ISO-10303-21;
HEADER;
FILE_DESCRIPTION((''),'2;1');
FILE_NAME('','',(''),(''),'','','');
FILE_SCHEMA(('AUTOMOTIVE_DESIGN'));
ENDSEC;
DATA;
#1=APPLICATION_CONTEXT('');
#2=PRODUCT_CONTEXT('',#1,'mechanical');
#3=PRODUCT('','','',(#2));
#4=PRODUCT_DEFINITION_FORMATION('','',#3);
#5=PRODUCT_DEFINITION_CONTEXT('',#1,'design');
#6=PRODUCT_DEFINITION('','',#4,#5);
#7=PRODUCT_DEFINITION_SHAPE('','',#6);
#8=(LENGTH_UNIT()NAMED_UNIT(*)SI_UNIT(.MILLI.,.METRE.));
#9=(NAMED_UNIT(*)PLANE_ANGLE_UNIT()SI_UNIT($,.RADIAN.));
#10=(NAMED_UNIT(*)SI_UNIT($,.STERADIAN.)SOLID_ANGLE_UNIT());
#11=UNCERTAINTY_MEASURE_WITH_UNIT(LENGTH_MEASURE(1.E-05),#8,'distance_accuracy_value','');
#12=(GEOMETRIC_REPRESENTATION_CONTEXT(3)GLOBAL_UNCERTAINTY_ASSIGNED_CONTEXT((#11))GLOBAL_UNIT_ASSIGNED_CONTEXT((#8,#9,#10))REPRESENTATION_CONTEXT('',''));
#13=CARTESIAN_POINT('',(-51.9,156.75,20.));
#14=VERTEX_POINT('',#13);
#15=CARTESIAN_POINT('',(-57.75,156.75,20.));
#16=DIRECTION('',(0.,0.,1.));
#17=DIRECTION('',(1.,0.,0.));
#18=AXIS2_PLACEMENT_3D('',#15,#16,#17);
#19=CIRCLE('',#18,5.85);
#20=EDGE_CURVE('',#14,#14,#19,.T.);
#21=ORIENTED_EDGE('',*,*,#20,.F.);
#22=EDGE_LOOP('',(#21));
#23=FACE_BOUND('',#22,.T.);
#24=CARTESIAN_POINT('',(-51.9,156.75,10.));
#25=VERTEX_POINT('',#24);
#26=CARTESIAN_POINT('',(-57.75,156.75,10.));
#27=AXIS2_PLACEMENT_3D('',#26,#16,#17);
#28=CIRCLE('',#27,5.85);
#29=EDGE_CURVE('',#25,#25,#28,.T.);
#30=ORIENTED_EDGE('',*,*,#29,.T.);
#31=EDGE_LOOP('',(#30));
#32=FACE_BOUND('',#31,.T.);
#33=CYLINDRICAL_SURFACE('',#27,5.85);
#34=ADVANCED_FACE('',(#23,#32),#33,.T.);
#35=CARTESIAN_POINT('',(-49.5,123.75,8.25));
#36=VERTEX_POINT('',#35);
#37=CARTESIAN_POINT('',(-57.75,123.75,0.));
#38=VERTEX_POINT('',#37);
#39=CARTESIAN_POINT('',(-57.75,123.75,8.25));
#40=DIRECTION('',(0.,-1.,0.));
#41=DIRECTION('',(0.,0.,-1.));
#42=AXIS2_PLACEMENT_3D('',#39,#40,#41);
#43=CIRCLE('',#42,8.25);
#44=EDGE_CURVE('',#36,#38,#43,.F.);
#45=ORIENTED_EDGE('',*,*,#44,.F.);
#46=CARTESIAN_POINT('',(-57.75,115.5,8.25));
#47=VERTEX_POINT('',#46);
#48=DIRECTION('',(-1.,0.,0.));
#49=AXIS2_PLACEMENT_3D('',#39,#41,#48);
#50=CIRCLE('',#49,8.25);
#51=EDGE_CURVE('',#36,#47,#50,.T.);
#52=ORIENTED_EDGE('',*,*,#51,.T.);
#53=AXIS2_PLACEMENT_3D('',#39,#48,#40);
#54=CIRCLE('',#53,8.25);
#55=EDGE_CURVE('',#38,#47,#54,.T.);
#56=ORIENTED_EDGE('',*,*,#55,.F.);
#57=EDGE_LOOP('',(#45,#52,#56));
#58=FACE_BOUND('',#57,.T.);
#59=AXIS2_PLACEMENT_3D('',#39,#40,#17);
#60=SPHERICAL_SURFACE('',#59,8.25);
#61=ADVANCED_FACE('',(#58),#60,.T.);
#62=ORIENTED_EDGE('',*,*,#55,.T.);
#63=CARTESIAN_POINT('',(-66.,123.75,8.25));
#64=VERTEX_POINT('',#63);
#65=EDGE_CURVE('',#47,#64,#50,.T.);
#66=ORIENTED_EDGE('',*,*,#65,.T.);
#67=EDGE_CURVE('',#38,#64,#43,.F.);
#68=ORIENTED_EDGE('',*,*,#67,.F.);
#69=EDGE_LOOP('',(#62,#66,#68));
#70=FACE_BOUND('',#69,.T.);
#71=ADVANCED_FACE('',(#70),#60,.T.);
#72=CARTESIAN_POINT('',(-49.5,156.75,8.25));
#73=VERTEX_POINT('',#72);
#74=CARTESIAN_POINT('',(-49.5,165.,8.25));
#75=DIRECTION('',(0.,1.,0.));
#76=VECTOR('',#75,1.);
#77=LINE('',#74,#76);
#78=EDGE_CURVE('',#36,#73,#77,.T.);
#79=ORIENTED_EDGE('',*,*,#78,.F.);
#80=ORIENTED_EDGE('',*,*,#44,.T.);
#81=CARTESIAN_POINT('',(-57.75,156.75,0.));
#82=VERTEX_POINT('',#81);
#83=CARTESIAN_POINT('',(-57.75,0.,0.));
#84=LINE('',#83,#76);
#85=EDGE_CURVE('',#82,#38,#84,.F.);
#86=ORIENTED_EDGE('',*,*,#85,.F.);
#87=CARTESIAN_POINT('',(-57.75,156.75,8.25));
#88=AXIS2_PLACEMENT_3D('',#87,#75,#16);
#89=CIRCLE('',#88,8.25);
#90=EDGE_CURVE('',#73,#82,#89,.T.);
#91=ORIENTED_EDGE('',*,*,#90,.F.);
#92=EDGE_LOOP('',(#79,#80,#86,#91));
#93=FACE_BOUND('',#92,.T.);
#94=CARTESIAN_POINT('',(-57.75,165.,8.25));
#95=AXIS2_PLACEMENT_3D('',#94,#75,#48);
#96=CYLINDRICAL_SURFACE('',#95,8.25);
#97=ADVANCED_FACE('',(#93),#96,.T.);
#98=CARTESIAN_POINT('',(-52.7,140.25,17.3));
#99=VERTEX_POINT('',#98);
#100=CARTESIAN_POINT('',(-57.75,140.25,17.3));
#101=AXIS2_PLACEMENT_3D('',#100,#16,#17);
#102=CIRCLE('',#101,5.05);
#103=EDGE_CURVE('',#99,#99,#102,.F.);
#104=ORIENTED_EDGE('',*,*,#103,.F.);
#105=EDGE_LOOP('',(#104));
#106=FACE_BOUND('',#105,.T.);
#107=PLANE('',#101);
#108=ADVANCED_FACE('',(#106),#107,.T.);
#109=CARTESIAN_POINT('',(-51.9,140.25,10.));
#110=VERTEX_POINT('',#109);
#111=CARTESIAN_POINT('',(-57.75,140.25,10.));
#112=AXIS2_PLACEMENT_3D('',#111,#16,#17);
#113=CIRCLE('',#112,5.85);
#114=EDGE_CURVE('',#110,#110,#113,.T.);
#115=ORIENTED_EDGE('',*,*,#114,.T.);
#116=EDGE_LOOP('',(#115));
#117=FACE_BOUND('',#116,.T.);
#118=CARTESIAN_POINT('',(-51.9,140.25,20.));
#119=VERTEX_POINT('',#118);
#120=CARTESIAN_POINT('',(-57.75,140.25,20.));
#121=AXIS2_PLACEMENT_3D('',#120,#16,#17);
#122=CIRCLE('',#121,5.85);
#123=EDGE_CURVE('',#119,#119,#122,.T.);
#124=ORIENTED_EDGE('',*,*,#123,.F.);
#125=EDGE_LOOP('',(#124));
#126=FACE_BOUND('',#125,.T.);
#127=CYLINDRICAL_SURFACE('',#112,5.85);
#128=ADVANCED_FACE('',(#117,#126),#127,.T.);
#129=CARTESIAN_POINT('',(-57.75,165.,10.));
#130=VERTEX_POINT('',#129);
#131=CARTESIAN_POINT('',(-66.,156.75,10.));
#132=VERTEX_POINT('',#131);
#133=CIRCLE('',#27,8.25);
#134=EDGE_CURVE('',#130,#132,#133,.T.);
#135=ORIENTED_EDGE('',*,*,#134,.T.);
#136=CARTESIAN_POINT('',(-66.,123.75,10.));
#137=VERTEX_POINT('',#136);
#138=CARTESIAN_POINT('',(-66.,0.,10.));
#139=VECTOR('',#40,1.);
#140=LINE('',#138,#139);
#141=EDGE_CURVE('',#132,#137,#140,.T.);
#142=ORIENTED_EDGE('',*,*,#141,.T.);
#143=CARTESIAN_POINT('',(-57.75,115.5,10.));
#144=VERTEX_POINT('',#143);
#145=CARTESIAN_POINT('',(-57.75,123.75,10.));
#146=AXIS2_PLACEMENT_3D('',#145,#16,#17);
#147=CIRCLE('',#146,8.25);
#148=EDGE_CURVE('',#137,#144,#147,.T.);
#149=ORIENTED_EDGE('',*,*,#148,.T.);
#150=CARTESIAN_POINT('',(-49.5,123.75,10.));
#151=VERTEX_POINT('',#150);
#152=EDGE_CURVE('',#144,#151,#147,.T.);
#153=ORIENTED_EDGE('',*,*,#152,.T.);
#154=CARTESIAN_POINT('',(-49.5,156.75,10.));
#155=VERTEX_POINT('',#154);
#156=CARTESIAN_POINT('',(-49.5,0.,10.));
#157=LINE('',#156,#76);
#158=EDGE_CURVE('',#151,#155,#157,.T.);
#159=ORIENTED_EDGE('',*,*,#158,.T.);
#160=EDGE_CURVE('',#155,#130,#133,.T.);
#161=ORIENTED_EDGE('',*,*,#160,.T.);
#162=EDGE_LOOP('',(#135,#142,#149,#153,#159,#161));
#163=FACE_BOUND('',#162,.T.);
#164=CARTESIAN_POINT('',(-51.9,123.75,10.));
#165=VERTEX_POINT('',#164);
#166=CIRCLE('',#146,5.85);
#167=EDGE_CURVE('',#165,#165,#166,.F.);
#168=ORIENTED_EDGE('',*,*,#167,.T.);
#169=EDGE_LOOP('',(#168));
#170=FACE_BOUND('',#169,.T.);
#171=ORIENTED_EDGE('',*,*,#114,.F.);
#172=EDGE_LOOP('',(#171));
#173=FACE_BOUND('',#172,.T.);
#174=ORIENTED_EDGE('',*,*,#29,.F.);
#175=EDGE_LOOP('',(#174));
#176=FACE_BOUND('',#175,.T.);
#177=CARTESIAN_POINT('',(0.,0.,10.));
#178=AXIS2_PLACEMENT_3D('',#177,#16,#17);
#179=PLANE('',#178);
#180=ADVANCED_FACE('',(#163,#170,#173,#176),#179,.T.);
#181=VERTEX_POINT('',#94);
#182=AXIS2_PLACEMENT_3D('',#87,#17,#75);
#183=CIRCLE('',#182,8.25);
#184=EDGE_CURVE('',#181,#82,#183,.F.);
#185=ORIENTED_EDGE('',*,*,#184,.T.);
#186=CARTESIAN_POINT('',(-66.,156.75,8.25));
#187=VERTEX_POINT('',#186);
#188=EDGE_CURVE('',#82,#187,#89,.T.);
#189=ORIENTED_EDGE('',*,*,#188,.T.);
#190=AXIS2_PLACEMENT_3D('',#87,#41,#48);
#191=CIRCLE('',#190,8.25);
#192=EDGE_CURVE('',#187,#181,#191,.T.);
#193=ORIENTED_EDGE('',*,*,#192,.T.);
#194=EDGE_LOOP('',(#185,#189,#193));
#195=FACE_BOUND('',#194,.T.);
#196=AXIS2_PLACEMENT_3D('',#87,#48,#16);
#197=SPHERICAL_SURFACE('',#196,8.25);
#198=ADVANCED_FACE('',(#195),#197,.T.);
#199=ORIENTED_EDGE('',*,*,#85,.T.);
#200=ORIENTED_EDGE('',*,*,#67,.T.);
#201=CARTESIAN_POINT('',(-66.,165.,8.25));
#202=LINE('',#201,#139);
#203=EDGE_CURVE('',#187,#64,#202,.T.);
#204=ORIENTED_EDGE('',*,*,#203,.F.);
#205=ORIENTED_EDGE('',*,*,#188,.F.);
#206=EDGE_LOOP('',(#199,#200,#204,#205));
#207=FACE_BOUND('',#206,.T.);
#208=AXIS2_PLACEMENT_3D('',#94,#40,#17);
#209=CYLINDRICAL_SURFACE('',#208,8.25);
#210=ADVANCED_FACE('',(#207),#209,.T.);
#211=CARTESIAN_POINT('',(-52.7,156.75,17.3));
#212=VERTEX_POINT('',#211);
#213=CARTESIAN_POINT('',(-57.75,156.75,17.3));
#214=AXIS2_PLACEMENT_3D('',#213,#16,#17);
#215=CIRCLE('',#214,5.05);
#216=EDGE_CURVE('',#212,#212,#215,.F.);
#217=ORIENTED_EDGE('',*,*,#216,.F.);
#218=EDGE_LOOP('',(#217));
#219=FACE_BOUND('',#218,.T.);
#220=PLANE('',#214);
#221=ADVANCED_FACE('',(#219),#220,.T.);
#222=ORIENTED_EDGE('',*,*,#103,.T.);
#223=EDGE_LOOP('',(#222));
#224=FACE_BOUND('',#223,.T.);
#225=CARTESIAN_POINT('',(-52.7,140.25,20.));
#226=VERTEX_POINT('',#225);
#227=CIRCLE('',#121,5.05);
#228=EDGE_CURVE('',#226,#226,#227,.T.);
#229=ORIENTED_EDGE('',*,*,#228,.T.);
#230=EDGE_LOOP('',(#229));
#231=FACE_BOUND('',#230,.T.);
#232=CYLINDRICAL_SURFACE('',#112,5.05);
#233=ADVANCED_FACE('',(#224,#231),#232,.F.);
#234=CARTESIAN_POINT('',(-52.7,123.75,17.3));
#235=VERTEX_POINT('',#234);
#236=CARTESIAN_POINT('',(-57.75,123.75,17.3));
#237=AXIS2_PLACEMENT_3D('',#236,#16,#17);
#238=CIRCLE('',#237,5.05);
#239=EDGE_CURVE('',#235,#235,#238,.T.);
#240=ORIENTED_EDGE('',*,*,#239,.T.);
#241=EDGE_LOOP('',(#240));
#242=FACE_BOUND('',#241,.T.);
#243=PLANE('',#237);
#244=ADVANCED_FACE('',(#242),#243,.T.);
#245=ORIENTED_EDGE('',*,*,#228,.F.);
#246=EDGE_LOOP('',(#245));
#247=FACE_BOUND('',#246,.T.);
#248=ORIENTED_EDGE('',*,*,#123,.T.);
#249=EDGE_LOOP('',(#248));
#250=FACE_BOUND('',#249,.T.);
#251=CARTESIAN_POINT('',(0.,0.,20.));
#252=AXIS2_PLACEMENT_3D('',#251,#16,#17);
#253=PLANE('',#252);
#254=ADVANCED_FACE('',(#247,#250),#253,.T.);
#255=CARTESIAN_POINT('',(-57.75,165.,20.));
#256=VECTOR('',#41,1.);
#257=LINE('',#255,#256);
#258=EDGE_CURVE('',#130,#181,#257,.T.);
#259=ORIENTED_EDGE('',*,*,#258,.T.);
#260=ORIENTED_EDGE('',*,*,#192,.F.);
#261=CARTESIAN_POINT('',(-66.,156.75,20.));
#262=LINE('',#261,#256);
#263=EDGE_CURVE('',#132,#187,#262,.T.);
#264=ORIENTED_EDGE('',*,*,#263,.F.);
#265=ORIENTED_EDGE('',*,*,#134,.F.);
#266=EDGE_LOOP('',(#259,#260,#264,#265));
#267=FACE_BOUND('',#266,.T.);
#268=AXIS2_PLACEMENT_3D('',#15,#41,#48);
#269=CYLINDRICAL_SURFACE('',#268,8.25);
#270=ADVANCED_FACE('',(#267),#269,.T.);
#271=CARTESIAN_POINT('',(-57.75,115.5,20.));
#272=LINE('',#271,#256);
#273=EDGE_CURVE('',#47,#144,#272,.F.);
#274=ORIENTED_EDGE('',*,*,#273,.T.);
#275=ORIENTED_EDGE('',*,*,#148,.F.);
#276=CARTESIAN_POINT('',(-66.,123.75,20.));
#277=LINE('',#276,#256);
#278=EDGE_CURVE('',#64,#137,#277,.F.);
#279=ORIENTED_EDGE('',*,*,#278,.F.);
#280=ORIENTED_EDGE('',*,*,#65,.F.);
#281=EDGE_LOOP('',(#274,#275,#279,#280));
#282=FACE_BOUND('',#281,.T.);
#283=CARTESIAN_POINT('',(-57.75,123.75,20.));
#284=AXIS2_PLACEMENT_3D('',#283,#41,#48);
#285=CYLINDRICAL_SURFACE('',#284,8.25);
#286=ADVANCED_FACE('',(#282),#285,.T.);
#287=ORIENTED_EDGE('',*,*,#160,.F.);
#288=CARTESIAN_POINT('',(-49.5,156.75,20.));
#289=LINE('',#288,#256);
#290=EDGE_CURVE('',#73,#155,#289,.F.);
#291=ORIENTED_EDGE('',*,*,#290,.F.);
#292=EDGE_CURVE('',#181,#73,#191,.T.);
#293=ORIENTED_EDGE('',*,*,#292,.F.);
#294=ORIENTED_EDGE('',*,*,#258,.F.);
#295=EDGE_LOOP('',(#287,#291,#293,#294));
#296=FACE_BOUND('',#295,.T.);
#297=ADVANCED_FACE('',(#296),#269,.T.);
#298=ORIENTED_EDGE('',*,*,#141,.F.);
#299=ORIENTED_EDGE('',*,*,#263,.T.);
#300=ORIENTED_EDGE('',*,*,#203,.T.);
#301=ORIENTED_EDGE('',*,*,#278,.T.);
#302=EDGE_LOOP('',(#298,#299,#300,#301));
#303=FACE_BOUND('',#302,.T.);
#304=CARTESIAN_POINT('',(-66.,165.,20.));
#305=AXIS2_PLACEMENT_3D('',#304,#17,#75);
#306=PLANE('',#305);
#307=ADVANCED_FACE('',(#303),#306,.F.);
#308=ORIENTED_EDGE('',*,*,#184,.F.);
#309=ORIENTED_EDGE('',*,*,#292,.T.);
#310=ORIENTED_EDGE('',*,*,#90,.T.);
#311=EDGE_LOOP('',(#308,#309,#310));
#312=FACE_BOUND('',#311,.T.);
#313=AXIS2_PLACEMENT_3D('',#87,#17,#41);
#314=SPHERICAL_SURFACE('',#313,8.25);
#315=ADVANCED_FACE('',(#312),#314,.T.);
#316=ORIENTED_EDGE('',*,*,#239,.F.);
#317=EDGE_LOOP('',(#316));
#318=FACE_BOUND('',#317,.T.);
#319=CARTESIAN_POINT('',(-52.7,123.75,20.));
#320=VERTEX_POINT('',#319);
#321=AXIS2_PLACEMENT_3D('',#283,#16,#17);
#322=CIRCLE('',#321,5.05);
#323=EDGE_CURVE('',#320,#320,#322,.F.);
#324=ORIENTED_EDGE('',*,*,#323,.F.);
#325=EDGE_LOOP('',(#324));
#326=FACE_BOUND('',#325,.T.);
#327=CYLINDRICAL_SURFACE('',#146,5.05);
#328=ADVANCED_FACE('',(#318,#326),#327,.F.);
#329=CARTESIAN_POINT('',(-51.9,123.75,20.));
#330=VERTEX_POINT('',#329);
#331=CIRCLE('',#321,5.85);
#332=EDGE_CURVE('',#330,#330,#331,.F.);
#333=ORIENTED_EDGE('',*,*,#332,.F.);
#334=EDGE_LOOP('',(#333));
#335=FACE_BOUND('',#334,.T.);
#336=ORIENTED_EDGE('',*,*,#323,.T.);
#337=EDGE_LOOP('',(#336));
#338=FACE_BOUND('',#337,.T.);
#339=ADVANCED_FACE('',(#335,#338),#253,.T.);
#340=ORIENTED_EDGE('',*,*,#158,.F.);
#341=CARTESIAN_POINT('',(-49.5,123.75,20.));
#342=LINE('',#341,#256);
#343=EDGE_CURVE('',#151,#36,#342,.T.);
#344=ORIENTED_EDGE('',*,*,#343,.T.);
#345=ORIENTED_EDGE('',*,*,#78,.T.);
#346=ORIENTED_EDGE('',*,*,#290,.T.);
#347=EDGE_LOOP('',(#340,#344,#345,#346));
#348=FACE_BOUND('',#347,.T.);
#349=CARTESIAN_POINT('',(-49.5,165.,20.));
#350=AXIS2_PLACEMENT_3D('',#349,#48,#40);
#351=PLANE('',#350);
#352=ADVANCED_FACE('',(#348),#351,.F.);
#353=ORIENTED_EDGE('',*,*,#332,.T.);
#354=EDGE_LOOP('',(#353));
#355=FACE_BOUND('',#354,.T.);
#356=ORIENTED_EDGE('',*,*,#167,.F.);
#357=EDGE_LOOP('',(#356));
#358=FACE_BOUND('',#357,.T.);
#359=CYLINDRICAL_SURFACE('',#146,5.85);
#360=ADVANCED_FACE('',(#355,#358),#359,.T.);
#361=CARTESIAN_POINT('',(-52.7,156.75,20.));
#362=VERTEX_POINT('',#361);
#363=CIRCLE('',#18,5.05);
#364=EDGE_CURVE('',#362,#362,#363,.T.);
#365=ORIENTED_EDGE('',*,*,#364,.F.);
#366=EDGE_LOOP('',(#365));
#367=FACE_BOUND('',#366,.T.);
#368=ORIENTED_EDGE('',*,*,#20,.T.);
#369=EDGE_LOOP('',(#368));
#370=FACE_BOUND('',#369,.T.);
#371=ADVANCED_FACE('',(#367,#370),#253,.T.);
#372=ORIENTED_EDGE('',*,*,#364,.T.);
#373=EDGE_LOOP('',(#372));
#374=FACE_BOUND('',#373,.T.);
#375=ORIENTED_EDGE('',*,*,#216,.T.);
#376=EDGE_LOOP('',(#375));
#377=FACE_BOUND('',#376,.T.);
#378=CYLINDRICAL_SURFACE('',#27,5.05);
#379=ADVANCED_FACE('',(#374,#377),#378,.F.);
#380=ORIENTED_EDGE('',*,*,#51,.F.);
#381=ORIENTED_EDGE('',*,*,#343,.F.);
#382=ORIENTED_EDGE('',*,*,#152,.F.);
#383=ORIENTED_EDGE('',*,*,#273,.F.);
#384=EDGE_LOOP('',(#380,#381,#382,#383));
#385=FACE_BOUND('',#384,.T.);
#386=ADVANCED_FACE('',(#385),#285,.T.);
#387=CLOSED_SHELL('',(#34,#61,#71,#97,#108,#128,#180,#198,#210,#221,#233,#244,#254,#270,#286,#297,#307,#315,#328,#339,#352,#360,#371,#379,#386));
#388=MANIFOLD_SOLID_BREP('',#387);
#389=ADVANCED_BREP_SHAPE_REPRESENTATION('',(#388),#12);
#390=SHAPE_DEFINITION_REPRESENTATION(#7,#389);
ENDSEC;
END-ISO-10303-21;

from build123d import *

# Parameters (mm, degrees)
SKETCH1_W           = 16.5
SKETCH1_H           = 49.5
BOSS_EXTRUDE1_DEPTH = 20
SKETCH2_R           = 5.85
SKETCH2_R_2         = 5.05
CUT_EXTRUDE1_DEPTH  = 10
FILLET1_R           = 8.25
SKETCH5_R           = 5.1
BOSS_EXTRUDE2_DEPTH = 7.3


with BuildPart() as part:
    # Sketch1 → Boss-Extrude1 (new body)
    with BuildSketch(Plane.XY):
        with Locations((-57.75, 140.25)):
            Rectangle(SKETCH1_W, SKETCH1_H)
    extrude(amount=BOSS_EXTRUDE1_DEPTH)

    # Sketch2 → Cut-Extrude1 (cut)
    # profile 1 of 8: a face of its own
    with BuildSketch(Plane.XY.offset(20)):
        with BuildLine():
            ThreePointArc((-63.6, 140.25), (-57.75, 146.1), (-51.9, 140.25))
            Line((-51.9, 140.25), (-49.5, 140.25))
            Line((-49.5, 140.25), (-49.5, 165))
            Line((-49.5, 165), (-66, 165))
            Line((-66, 165), (-66, 140.25))
            Line((-66, 140.25), (-63.6, 140.25))
        make_face()
        with Locations((-57.75, 156.75)):
            Circle(SKETCH2_R, mode=Mode.SUBTRACT)
    # profile 2 of 8: a face of its own
    with BuildSketch(Plane.XY.offset(20)):
        with BuildLine():
            Line((-49.5, 140.25), (-51.9, 140.25))
            ThreePointArc((-51.9, 140.25), (-57.75, 134.4), (-63.6, 140.25))
            Line((-63.6, 140.25), (-66, 140.25))
            Line((-66, 140.25), (-66, 115.5))
            Line((-66, 115.5), (-49.5, 115.5))
            Line((-49.5, 115.5), (-49.5, 140.25))
        make_face()
        with Locations((-57.75, 123.75)):
            Circle(SKETCH2_R, mode=Mode.SUBTRACT)
    # profile 3 of 8: a face of its own
    with BuildSketch(Plane.XY.offset(20)):
        with Locations((-57.75, 156.75)):
            Circle(SKETCH2_R_2)
    # profile 4 of 8: a face of its own
    with BuildSketch(Plane.XY.offset(20)):
        with BuildLine():
            ThreePointArc((-62.8, 140.25), (-57.75, 135.2), (-52.7, 140.25))
            Line((-52.7, 140.25), (-62.8, 140.25))
        make_face()
    # profile 5 of 8: a face of its own
    with BuildSketch(Plane.XY.offset(20)):
        with BuildLine():
            Line((-62.8, 140.25), (-52.7, 140.25))
            ThreePointArc((-52.7, 140.25), (-57.75, 145.3), (-62.8, 140.25))
        make_face()
    # profile 6 of 8: a face of its own
    with BuildSketch(Plane.XY.offset(20)):
        with BuildLine():
            ThreePointArc((-62.8, 140.25), (-57.75, 135.2), (-52.7, 140.25))
            Line((-52.7, 140.25), (-62.8, 140.25))
        make_face()
    # profile 7 of 8: a face of its own
    with BuildSketch(Plane.XY.offset(20)):
        with BuildLine():
            Line((-62.8, 140.25), (-52.7, 140.25))
            ThreePointArc((-52.7, 140.25), (-57.75, 145.3), (-62.8, 140.25))
        make_face()
    # profile 8 of 8: a face of its own
    with BuildSketch(Plane.XY.offset(20)):
        with Locations((-57.75, 123.75)):
            Circle(SKETCH2_R_2)
    extrude(amount=-CUT_EXTRUDE1_DEPTH, mode=Mode.SUBTRACT)

    # Fillet1
    fillet1_edges = [part.edges().sort_by_distance(p)[0] for p in [
        (-57.75, 165, 0),
    ]]
    fillet(fillet1_edges, radius=FILLET1_R)
    fillet1_2_edges = [part.edges().sort_by_distance(p)[0] for p in [
        (-49.5, 136.125, 0),
    ]]
    fillet(fillet1_2_edges, radius=FILLET1_R)
    fillet1_3_edges = [part.edges().sort_by_distance(p)[0] for p in [
        (-61.875, 115.5, 0),
    ]]
    fillet(fillet1_3_edges, radius=FILLET1_R)
    fillet1_4_edges = [part.edges().sort_by_distance(p)[0] for p in [
        (-66, 140.25, 0),
    ]]
    fillet(fillet1_4_edges, radius=FILLET1_R - 0.0001)  # a hair under: the kernel refuses the full size

    # Sketch5 → Boss-Extrude2 (add)
    with BuildSketch(Plane.XY.offset(10)):
        with Locations((-57.75, 156.75)):
            Circle(SKETCH5_R)
        with Locations((-57.75, 140.25)):
            Circle(SKETCH5_R)
        with Locations((-57.75, 123.75)):
            Circle(SKETCH5_R)
    extrude(amount=BOSS_EXTRUDE2_DEPTH)


solid = part.part
